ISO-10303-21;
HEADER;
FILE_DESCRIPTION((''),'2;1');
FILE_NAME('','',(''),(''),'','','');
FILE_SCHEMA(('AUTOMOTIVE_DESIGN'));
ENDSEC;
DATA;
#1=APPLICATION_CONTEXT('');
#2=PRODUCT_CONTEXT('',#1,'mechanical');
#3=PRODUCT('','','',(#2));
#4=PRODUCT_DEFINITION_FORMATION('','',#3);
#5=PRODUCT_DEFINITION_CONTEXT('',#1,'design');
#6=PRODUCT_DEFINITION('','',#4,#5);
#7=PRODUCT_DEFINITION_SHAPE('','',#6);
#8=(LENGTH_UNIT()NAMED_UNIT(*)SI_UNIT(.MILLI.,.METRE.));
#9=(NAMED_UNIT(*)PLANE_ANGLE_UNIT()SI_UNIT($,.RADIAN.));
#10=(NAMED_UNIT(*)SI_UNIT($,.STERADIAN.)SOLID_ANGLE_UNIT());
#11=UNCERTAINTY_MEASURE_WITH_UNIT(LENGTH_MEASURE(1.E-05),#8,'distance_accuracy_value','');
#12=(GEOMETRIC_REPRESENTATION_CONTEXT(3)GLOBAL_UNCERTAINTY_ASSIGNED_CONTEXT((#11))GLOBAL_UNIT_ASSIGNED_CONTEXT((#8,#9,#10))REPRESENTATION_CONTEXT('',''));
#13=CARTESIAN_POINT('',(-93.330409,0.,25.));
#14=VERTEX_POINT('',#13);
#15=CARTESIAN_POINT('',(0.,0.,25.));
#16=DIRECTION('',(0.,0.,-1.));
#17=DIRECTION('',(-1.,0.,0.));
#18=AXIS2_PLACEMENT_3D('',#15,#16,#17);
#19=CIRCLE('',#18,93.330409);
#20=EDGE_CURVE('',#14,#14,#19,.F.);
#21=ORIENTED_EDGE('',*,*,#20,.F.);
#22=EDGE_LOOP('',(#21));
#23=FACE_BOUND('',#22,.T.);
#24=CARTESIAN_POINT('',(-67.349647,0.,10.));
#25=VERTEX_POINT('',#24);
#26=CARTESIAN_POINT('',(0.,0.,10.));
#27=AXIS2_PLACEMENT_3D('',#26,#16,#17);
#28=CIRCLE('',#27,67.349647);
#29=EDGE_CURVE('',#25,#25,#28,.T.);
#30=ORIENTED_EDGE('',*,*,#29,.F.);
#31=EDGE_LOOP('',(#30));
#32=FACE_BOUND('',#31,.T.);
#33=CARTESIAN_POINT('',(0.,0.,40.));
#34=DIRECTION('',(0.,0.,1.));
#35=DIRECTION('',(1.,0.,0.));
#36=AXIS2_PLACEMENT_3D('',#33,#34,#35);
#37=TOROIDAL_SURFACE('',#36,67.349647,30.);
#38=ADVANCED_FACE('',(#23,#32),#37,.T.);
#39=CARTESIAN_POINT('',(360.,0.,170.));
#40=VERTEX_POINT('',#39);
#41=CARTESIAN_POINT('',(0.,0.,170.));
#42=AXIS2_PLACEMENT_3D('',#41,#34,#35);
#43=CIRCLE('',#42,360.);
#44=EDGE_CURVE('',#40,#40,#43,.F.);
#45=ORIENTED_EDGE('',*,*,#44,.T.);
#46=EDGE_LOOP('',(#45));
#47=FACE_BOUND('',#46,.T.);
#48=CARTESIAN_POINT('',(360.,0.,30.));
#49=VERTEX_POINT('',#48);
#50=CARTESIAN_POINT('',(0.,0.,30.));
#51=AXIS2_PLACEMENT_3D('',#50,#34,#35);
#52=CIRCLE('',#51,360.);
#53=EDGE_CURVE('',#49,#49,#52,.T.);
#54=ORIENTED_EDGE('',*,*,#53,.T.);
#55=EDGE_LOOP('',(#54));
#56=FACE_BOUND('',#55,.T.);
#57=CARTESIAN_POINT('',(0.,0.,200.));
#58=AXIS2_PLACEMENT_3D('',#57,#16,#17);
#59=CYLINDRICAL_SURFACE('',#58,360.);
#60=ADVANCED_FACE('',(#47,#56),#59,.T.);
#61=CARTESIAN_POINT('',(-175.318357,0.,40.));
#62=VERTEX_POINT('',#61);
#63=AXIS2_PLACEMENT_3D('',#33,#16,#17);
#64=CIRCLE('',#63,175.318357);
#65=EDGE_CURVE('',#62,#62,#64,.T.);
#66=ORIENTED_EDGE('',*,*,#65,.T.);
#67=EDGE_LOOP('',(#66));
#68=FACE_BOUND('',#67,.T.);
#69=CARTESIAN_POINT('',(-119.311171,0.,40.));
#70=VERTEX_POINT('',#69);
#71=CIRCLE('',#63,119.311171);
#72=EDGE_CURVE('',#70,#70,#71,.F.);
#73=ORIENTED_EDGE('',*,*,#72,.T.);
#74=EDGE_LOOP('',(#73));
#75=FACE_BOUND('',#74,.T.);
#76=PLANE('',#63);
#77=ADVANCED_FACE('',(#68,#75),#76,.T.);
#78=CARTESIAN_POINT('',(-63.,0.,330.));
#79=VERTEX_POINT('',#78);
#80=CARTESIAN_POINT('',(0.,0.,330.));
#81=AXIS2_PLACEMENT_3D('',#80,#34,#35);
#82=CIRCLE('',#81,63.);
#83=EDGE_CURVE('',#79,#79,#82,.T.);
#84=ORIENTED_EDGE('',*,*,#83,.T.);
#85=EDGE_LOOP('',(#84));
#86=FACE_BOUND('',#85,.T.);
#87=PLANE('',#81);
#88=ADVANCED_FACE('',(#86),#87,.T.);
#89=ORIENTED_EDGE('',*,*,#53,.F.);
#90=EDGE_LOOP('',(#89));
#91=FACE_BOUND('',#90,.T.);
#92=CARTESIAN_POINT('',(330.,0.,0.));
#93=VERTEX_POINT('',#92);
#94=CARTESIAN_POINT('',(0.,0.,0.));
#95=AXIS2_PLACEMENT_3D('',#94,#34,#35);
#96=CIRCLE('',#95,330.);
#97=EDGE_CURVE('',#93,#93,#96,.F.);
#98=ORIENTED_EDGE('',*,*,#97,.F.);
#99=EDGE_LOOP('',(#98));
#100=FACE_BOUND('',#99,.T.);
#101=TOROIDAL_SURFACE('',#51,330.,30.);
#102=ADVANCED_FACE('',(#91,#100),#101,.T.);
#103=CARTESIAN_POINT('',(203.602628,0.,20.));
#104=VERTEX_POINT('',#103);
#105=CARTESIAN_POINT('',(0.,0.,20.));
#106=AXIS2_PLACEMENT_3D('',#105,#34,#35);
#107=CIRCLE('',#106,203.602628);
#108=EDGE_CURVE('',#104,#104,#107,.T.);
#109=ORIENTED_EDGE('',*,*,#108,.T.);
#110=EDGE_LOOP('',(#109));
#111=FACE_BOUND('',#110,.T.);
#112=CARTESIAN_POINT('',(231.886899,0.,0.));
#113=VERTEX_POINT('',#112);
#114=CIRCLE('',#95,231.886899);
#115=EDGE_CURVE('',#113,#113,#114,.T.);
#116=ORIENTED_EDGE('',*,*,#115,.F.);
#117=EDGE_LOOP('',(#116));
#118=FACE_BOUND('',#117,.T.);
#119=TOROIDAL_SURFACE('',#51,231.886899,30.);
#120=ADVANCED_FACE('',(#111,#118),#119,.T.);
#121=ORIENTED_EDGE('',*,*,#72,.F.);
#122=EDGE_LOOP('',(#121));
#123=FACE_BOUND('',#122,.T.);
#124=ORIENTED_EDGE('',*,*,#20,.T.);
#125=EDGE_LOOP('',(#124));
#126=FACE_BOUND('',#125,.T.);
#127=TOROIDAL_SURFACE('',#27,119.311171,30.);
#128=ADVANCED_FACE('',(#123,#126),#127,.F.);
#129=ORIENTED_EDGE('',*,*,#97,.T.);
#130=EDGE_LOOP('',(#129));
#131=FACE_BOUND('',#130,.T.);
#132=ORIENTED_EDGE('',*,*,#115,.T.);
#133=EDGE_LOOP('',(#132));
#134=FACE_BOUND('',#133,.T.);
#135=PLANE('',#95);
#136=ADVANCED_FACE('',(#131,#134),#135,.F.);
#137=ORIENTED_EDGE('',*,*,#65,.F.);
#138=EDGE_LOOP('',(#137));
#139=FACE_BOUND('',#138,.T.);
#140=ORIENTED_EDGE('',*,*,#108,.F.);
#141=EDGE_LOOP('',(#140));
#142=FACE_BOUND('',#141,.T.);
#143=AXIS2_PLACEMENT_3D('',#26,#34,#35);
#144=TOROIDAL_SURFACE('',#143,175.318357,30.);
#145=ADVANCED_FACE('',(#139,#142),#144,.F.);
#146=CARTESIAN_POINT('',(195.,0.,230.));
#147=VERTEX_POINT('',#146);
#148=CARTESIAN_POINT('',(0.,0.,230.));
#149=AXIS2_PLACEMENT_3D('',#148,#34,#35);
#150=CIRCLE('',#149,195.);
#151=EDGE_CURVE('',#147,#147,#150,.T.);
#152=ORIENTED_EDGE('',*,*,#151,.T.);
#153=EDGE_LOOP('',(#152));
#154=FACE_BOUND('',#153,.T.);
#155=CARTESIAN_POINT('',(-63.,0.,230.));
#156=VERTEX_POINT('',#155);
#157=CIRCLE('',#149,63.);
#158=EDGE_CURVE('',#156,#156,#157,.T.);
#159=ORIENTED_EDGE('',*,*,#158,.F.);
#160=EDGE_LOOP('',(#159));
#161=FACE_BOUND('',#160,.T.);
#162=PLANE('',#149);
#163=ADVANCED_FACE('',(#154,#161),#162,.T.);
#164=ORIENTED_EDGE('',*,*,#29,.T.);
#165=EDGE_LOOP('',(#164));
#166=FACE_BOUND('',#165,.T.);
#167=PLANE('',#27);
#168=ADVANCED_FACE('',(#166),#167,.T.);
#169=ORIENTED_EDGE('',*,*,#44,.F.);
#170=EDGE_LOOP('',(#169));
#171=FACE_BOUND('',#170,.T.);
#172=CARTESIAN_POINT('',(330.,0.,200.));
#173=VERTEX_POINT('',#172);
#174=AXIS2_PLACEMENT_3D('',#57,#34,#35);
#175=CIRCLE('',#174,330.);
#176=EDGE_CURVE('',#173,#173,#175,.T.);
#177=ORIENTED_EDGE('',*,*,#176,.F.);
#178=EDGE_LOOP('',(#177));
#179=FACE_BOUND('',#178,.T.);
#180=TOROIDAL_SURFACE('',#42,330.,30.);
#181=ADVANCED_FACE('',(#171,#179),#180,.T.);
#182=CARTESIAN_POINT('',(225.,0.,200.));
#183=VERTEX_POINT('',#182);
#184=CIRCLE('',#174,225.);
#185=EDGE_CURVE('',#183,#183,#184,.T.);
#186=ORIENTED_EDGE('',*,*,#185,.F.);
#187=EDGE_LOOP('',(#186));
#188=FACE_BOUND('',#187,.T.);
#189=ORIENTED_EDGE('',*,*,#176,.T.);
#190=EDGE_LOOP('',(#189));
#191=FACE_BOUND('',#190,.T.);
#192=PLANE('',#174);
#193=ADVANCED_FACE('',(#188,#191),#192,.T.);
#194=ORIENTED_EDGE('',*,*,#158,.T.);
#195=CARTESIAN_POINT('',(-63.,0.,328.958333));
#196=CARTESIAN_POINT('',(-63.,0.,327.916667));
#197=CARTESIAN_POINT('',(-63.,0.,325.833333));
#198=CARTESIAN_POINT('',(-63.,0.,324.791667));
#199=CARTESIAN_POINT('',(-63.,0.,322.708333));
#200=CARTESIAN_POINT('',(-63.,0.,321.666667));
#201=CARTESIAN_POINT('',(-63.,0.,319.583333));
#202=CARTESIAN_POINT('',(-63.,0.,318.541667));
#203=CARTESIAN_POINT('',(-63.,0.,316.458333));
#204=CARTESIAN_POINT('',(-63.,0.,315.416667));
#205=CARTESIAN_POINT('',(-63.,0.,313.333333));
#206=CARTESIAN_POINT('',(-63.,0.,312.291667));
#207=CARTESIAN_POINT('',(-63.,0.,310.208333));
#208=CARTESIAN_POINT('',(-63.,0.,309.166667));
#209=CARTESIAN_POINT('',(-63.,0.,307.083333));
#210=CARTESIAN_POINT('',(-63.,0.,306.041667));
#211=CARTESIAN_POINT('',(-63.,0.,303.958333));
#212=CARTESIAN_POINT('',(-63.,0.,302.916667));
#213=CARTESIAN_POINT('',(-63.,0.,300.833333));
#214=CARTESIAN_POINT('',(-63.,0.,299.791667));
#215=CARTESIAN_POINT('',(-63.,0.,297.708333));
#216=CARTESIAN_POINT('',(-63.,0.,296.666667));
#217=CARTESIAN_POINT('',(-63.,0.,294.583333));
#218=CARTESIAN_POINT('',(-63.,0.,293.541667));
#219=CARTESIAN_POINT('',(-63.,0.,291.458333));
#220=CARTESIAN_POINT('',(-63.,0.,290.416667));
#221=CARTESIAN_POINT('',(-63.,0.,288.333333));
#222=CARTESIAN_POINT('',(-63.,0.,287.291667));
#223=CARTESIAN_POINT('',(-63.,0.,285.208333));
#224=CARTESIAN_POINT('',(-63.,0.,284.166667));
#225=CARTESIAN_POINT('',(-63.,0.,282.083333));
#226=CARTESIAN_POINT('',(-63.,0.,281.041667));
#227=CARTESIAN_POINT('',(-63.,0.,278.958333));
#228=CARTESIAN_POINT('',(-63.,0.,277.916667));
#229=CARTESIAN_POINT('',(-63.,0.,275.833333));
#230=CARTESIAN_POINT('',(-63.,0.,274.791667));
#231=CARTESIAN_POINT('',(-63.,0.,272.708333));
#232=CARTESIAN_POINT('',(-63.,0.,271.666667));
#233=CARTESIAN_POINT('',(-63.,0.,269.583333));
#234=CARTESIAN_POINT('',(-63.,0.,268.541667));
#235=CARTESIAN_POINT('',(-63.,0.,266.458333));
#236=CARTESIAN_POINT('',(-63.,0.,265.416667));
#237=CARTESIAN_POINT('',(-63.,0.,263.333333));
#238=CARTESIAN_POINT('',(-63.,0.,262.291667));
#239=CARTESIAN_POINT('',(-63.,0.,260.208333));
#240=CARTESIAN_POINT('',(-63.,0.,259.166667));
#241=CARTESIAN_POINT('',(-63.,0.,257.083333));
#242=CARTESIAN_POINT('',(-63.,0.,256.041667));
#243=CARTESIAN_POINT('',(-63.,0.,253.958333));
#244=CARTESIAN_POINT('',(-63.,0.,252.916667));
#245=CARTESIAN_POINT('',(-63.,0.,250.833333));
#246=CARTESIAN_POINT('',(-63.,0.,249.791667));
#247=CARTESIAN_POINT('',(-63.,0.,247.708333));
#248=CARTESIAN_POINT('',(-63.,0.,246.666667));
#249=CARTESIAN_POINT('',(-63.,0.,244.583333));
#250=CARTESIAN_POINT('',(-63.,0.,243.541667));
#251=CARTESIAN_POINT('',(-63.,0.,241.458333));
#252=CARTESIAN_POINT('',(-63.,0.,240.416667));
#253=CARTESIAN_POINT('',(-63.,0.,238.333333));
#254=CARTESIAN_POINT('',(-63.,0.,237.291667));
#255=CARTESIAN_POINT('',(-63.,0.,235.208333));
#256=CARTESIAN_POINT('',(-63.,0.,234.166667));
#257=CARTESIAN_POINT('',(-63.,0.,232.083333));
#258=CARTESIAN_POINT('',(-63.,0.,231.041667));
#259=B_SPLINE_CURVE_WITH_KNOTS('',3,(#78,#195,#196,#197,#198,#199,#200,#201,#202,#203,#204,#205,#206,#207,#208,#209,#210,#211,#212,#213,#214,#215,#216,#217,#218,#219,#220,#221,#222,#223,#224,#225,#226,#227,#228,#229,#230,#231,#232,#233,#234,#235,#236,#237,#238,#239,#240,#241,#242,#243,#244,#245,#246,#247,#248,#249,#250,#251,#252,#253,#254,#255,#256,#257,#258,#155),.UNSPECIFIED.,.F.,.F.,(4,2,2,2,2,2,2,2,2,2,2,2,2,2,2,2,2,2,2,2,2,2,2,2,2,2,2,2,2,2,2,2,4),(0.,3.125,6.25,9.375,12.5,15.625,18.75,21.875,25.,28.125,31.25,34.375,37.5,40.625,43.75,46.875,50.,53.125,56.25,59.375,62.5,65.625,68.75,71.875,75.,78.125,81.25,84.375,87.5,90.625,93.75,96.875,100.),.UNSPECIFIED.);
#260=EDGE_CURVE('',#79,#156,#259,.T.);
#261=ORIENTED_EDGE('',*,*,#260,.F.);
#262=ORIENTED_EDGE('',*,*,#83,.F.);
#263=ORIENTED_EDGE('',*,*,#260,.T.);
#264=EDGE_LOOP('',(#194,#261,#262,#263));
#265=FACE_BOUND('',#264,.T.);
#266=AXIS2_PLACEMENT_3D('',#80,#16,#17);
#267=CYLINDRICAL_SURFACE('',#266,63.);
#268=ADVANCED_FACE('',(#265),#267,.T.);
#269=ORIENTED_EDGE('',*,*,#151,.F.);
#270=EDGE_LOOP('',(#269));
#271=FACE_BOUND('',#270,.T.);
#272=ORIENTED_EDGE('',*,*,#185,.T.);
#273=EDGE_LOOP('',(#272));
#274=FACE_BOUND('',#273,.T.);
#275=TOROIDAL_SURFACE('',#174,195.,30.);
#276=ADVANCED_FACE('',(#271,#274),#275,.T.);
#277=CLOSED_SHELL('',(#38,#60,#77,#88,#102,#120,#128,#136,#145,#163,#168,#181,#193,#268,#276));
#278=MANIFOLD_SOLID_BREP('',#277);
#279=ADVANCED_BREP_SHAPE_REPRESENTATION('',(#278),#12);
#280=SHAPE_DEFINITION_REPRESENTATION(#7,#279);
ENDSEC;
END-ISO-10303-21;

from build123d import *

# Parameters (mm, degrees)
SKETCH1_R           = 360
BOSS_EXTRUDE1_DEPTH = 200
SKETCH2_R           = 225
BOSS_EXTRUDE2_DEPTH = 30
SKETCH3_R           = 63
BOSS_EXTRUDE3_DEPTH = 100
FILLET1_R           = 30
SKETCH4_R           = 201.886899345
CUT_EXTRUDE1_DEPTH  = 40
FILLET2_R           = 30
FILLET3_R           = 30
SKETCH5_R           = 89.311171206
BOSS_EXTRUDE4_DEPTH = 30
FILLET4_R           = 30
FILLET5_R           = 30


with BuildPart() as part:
    # Sketch1 → Boss-Extrude1 (new body)
    with BuildSketch(Plane.XY):
        Circle(SKETCH1_R)
    extrude(amount=BOSS_EXTRUDE1_DEPTH)

    # Sketch2 → Boss-Extrude2 (add)
    with BuildSketch(Plane.XY.offset(200)):
        Circle(SKETCH2_R)
    extrude(amount=BOSS_EXTRUDE2_DEPTH)

    # Sketch3 → Boss-Extrude3 (add)
    with BuildSketch(Plane.XY.offset(230)):
        with Locations(Location((0, 0, 0), (0, 0, 180))):
            Circle(SKETCH3_R)
    extrude(amount=BOSS_EXTRUDE3_DEPTH)

    # Fillet1
    fillet1_edges = [part.edges().sort_by_distance(p)[0] for p in [
        (-360, 0, 0),
        (-360, 0, 200),
        (-225, 0, 230),
    ]]
    fillet(fillet1_edges, radius=FILLET1_R - 0.0001)  # a hair under: the kernel refuses the full size

    # Sketch4 → Cut-Extrude1 (cut)
    with BuildSketch(Plane(origin=(0, 0, 0), x_dir=(-1, 0, 0), z_dir=(0, 0, -1))):
        Circle(SKETCH4_R)
    extrude(amount=-CUT_EXTRUDE1_DEPTH, mode=Mode.SUBTRACT)

    # Fillet2
    fillet2_edges = [part.edges().sort_by_distance(p)[0] for p in [
        (201.886899345, 0, 0),
    ]]
    fillet(fillet2_edges, radius=FILLET2_R)

    # Fillet3
    fillet3_edges = [part.edges().sort_by_distance(p)[0] for p in [
        (201.886899345, 0, 40),
    ]]
    fillet(fillet3_edges, radius=FILLET3_R)

    # Sketch5 → Boss-Extrude4 (add)
    with BuildSketch(Plane(origin=(0, 0, 40), x_dir=(-1, 0, 0), z_dir=(0, 0, -1))):
        Circle(SKETCH5_R)
    extrude(amount=BOSS_EXTRUDE4_DEPTH)

    # Fillet4
    fillet4_edges = [part.edges().sort_by_distance(p)[0] for p in [
        (89.311171206, 0, 40),
    ]]
    fillet(fillet4_edges, radius=FILLET4_R - 0.0001)  # a hair under: the kernel refuses the full size

    # Fillet5
    fillet5_edges = [part.edges().sort_by_distance(p)[0] for p in [
        (89.311171206, 0, 10),
    ]]
    fillet(fillet5_edges, radius=FILLET5_R)


solid = part.part
